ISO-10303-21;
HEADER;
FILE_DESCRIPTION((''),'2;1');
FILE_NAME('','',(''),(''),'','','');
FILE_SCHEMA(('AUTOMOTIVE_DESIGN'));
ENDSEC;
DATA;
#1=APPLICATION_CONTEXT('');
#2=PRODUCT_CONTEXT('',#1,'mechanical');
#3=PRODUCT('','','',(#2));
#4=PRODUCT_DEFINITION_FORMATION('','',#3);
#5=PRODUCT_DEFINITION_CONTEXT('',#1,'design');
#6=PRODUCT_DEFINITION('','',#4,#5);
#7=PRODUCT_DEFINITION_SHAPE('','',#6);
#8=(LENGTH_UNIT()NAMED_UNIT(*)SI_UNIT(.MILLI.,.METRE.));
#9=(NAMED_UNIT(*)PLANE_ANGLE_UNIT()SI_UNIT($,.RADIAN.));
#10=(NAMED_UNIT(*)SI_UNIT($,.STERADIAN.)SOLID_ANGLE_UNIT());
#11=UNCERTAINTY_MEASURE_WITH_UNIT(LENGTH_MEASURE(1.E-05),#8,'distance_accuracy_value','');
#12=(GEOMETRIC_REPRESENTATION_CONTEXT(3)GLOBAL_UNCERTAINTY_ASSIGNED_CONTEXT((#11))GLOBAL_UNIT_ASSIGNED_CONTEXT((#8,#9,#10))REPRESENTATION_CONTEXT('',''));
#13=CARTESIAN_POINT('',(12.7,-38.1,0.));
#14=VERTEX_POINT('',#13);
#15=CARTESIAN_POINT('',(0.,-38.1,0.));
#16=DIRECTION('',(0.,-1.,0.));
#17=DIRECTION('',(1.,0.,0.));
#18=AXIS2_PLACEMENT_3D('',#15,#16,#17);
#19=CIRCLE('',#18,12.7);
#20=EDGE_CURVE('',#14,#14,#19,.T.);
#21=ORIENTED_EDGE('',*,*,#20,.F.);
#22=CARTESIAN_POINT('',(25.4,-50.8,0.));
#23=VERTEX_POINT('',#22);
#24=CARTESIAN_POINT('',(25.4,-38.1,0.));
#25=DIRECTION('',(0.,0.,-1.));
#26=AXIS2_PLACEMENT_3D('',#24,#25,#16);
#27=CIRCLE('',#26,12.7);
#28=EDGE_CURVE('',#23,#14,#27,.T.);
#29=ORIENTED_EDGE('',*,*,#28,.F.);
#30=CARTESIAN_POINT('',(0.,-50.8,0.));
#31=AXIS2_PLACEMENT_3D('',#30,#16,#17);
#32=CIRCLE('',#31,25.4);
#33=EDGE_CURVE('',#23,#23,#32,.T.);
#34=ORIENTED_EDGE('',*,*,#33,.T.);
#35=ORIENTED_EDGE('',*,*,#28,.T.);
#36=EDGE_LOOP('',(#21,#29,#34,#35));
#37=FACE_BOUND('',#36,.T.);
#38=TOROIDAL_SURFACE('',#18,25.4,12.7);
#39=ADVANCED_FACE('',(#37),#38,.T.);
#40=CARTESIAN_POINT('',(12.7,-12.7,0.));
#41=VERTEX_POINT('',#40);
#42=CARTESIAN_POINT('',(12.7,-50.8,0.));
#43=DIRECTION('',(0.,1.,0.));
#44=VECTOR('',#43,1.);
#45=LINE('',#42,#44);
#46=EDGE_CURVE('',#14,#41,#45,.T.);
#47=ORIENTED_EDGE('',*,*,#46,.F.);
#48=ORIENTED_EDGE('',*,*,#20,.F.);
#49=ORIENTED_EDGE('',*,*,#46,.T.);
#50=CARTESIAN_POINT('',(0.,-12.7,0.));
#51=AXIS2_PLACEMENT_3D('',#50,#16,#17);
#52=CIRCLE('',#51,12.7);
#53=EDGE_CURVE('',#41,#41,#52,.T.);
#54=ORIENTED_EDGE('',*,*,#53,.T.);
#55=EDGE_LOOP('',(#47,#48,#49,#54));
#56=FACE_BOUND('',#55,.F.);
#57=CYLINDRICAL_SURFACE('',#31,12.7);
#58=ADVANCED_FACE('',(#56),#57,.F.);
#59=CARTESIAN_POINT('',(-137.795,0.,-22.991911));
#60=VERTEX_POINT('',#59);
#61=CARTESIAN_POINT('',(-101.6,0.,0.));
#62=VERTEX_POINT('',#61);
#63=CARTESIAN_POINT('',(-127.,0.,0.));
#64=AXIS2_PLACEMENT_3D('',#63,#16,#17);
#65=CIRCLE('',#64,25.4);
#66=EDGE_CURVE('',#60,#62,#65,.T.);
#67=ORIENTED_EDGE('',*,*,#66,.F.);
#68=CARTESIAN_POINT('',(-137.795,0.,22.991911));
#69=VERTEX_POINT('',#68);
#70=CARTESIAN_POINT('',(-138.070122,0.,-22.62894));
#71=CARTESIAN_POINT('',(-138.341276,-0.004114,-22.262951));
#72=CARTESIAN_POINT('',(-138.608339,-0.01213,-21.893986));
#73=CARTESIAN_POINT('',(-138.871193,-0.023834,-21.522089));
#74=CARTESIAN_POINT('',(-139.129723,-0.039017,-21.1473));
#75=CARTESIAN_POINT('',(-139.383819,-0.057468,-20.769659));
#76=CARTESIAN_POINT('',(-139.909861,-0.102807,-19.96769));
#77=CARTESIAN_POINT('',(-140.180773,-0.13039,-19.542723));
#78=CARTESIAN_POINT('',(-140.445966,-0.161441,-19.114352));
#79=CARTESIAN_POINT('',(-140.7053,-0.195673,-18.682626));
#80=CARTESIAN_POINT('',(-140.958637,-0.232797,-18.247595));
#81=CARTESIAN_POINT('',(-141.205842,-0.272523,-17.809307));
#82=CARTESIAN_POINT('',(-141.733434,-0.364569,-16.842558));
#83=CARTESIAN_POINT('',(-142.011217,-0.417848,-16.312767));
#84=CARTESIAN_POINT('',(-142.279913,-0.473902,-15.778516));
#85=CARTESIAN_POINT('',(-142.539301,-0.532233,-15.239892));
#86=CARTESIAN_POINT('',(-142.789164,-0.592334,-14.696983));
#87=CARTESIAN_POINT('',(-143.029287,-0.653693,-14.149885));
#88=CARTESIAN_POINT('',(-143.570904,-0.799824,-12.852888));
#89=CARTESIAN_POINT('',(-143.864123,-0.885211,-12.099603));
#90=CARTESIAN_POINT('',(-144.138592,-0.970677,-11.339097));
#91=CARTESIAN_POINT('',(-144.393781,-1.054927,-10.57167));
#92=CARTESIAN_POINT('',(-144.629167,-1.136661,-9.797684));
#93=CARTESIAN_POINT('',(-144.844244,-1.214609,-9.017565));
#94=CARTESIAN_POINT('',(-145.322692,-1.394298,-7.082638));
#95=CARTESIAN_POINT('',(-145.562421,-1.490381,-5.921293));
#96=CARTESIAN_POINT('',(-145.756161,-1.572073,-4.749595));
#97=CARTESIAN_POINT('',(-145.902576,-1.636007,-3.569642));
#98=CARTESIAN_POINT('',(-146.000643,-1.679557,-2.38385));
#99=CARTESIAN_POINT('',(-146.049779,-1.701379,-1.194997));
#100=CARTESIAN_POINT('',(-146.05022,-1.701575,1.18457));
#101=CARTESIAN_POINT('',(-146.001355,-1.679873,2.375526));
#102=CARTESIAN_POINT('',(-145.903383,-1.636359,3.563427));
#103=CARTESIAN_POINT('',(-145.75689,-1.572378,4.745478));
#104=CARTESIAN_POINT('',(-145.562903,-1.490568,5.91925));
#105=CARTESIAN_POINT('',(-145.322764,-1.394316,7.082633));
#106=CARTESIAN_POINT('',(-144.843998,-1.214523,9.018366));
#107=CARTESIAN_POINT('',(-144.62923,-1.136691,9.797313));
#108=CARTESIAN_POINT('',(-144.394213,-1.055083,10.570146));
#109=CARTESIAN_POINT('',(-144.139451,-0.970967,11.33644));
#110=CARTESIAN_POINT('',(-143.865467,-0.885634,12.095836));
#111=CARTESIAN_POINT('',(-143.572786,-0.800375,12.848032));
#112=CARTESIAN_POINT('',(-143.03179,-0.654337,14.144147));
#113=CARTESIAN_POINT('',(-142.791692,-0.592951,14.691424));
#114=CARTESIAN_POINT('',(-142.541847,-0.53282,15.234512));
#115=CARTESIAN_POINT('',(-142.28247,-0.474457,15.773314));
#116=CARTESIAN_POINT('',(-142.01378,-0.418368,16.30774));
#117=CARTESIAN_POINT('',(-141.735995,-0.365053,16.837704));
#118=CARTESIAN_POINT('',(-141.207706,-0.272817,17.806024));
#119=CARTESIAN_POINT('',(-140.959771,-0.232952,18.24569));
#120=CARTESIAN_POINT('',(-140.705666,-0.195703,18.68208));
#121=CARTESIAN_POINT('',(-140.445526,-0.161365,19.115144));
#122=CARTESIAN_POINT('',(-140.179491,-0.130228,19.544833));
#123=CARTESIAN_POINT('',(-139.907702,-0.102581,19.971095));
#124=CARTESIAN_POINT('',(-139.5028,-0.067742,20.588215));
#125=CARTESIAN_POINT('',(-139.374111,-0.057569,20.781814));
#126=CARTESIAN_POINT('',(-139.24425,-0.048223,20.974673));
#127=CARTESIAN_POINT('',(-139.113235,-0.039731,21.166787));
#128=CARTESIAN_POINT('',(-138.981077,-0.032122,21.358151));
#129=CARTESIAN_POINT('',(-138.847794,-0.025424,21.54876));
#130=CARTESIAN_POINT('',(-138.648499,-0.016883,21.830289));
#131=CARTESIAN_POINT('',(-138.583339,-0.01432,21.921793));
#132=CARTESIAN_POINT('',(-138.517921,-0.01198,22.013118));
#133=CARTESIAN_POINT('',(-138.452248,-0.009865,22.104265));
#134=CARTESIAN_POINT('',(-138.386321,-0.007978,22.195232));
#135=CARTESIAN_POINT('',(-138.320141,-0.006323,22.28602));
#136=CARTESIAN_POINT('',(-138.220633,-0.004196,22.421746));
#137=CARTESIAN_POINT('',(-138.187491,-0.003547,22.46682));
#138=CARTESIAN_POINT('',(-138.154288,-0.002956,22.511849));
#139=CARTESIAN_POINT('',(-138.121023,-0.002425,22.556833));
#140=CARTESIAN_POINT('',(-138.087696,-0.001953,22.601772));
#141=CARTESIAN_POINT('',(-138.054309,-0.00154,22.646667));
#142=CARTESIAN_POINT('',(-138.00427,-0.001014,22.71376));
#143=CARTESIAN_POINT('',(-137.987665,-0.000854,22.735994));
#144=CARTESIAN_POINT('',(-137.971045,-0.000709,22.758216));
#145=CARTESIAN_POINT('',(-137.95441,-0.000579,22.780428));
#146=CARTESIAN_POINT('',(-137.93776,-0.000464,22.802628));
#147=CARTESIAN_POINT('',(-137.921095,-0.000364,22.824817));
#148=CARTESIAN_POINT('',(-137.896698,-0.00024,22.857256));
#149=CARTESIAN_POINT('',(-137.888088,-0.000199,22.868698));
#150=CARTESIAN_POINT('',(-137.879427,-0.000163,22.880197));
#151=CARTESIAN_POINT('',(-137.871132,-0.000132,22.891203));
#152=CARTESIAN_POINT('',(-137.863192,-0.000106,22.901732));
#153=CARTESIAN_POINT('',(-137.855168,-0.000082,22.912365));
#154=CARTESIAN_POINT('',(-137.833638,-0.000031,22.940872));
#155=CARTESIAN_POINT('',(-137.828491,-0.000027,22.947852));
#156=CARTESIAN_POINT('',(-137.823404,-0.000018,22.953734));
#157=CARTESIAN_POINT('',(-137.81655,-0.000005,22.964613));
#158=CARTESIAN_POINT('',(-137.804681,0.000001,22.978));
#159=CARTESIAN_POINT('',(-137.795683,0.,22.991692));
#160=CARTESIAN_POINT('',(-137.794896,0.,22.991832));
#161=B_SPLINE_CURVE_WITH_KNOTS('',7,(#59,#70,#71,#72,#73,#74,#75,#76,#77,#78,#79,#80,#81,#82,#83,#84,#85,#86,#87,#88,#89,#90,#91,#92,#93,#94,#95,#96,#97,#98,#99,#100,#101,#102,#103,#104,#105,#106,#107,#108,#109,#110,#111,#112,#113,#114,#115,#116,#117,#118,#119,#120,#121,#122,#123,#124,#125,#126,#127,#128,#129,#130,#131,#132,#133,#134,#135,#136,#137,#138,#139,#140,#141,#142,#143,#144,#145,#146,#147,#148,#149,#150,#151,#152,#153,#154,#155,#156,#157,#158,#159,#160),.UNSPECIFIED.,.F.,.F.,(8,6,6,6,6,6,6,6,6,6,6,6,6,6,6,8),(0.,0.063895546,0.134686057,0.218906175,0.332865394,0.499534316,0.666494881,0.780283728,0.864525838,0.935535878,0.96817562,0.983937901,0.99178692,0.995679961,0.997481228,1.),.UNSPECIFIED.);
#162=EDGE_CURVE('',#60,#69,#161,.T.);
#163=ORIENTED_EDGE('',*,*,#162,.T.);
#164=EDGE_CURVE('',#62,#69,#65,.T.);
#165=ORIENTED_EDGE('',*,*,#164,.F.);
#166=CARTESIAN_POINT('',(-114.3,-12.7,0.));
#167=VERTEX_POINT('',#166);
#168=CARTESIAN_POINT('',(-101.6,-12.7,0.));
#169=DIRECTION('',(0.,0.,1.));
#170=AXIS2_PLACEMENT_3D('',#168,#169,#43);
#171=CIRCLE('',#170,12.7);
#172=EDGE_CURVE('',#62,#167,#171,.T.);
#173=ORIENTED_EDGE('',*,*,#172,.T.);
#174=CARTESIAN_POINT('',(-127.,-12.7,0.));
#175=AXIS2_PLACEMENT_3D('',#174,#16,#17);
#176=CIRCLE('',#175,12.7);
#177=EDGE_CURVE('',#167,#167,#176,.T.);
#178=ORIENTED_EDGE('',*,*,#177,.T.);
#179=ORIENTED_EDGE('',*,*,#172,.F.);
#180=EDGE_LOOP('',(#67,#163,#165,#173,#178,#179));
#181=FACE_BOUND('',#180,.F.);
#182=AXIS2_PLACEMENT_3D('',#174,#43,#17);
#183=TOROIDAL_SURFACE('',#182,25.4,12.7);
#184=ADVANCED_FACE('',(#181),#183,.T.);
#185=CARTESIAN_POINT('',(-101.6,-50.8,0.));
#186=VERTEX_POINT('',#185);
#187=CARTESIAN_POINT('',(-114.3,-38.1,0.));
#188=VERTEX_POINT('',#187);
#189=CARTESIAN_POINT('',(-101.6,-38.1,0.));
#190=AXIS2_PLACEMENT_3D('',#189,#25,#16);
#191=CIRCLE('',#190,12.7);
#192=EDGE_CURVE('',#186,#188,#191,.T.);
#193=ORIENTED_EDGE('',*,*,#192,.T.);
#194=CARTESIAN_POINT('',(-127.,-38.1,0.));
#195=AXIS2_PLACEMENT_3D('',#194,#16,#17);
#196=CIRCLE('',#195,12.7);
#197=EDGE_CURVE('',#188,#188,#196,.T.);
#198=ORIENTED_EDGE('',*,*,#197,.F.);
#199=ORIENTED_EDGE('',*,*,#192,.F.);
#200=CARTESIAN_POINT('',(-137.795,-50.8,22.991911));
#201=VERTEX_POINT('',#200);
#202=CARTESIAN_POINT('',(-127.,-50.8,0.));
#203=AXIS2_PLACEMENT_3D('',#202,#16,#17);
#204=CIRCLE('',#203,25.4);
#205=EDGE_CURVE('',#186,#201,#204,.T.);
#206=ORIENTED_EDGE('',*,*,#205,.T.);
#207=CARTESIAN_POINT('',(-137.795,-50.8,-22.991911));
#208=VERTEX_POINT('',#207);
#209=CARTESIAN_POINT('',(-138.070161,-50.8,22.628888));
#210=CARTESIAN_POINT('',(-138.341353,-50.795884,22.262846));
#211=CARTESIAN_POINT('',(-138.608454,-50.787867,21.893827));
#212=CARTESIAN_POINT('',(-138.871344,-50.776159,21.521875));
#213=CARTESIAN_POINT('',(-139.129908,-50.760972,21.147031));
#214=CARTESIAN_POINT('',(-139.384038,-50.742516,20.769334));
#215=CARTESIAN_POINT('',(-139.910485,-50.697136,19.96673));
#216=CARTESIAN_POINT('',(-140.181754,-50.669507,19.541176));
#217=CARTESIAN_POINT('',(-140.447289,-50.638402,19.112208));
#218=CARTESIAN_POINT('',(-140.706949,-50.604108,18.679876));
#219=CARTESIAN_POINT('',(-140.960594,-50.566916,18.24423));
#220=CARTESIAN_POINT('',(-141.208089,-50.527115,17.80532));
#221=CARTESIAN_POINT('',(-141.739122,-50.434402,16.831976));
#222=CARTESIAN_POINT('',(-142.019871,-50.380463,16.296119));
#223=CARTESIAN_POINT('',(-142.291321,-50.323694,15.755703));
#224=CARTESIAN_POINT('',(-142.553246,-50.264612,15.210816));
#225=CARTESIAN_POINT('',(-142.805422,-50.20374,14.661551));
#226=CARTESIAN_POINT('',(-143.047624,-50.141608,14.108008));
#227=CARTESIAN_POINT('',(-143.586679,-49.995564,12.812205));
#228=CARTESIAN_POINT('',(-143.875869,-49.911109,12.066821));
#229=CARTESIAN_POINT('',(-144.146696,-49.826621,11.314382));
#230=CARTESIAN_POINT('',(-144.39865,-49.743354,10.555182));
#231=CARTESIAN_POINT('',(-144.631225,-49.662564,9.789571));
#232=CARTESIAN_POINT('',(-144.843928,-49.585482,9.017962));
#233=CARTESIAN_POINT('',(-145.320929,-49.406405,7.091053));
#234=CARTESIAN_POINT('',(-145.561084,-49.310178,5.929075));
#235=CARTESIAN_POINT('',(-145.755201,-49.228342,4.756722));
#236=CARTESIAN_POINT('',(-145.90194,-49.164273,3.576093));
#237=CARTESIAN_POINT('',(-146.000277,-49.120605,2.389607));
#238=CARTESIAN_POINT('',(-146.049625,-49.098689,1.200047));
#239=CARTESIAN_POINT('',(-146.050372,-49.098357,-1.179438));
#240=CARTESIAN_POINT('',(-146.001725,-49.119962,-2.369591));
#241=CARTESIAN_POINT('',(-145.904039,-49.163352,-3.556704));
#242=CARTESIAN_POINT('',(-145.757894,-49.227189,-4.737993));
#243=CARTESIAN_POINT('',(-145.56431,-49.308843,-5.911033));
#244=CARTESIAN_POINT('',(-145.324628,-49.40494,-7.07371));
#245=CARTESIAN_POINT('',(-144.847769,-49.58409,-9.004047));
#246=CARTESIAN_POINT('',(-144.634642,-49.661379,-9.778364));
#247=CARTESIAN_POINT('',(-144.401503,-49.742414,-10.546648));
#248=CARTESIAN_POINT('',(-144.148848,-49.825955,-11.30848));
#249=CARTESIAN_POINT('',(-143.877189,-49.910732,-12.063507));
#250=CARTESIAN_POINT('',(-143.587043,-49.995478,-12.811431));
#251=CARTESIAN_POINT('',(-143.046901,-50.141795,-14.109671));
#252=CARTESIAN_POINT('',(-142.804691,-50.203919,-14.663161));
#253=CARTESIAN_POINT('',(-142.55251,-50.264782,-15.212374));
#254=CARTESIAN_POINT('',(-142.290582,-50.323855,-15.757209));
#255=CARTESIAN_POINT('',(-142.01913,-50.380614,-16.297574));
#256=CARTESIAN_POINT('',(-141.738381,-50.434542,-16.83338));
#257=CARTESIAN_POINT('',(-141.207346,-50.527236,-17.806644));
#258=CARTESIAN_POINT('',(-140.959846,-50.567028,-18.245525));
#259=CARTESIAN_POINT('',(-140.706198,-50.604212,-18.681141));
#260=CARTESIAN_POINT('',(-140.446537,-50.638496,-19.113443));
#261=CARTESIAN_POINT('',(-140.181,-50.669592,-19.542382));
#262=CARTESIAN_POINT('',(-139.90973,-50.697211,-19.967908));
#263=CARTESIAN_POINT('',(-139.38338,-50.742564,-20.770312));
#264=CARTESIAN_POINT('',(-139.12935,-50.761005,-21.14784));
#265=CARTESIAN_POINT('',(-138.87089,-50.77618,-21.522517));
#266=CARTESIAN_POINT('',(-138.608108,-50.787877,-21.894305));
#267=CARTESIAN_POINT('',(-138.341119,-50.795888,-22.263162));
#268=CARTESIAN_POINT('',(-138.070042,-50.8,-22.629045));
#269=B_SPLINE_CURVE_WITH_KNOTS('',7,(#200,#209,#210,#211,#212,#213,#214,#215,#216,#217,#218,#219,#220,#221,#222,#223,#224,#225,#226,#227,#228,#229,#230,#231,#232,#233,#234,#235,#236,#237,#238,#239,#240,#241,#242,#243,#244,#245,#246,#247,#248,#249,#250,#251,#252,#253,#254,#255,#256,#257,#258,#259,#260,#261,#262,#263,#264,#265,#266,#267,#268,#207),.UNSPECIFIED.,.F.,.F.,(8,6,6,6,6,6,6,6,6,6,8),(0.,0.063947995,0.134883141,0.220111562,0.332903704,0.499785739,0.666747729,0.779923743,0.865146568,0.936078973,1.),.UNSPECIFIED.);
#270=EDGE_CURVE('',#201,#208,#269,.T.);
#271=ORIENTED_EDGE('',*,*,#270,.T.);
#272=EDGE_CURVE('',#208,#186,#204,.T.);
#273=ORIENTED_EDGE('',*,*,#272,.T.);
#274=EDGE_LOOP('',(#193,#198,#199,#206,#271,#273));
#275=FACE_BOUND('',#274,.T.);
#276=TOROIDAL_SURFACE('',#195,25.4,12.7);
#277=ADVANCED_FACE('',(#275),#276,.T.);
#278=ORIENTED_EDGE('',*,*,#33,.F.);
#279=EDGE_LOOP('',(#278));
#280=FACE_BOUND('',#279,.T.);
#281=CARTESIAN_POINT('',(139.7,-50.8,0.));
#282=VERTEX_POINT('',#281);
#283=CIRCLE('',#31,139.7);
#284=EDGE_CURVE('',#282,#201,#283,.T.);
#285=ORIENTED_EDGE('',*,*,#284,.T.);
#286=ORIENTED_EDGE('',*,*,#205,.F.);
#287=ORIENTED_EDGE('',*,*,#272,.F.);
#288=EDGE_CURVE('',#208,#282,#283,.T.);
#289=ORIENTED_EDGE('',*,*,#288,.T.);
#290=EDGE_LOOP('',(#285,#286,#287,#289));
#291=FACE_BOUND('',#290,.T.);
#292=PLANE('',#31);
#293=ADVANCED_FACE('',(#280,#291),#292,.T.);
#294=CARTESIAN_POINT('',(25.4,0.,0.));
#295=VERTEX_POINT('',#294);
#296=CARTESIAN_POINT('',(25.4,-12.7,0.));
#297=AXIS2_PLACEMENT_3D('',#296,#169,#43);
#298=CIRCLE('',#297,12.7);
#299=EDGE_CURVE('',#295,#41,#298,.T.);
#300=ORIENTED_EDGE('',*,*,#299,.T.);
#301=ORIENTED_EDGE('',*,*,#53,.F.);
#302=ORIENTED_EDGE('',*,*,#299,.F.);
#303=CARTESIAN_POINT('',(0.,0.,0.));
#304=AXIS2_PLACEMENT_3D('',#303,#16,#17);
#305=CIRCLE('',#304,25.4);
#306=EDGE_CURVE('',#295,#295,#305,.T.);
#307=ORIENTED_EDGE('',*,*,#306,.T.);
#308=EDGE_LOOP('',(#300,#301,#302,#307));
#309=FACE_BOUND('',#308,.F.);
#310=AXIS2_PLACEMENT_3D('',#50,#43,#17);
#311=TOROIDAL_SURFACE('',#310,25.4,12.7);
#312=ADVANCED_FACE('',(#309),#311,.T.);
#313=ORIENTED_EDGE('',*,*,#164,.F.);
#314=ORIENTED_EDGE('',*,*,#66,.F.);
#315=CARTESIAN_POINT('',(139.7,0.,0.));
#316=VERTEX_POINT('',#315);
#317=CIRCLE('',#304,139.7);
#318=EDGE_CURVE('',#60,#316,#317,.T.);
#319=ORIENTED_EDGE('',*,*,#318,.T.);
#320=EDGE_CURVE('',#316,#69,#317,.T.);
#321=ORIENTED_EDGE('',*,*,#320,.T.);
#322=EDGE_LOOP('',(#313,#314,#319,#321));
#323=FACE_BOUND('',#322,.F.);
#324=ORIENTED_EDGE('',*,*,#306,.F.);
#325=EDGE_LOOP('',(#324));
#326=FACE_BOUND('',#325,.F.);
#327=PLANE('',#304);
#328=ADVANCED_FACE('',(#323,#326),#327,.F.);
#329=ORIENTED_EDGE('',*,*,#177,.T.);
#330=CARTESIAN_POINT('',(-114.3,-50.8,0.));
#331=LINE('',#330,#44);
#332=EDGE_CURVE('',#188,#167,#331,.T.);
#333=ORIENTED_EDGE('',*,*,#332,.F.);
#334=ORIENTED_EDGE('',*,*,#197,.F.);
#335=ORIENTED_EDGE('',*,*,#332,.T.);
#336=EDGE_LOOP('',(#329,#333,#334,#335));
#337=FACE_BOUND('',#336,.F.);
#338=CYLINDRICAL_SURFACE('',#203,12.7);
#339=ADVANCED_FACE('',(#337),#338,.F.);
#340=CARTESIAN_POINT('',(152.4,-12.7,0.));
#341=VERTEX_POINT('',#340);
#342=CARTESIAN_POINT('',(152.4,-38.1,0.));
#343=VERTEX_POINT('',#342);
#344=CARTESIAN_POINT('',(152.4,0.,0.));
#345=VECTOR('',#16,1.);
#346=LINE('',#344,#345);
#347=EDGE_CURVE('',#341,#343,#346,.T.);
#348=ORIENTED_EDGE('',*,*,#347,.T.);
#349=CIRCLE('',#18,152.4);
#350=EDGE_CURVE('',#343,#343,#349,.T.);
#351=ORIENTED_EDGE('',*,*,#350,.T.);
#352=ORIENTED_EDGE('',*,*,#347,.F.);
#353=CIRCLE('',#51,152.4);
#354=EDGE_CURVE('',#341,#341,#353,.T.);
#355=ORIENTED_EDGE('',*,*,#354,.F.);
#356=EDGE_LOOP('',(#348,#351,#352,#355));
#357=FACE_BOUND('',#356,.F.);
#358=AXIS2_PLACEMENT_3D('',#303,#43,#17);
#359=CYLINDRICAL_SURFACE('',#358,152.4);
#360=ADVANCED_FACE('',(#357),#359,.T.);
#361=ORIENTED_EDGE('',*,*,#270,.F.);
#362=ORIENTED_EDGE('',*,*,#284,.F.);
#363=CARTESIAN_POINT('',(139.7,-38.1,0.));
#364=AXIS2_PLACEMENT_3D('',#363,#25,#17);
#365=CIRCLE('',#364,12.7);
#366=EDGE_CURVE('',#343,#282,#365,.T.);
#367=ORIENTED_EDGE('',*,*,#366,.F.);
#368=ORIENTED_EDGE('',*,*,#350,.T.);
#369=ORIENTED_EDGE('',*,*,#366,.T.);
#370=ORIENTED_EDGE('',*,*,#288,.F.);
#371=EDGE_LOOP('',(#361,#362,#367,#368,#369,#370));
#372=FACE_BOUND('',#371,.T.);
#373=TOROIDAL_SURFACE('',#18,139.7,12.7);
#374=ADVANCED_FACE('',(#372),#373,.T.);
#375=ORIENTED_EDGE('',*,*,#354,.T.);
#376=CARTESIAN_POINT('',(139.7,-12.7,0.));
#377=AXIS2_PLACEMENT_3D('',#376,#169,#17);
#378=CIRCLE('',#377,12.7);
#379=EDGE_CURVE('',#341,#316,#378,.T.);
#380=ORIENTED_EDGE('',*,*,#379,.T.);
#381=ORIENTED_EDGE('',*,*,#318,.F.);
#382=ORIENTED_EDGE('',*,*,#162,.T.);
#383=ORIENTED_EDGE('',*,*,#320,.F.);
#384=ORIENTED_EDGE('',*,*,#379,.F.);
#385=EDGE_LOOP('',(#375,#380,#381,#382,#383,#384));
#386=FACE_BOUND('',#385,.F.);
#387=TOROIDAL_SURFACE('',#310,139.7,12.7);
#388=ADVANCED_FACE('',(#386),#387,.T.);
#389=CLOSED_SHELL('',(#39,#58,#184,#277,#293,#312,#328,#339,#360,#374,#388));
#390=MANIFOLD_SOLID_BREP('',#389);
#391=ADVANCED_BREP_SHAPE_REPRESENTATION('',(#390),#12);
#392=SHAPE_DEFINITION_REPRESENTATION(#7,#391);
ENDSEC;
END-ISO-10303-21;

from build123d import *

# Parameters (mm, degrees)
F0_R     = 152.4
F1_DEPTH = 50.8
F2_R     = 12.7
F3_DEPTH = 50.801


# Not quite as in the source:
# - a fillet or chamfer that OpenCascade refuses, or shapes differently, is made with other operations: its cross-section is extruded or revolved along the edge and cut away or added


with BuildPart() as f1:
    # F0 (on Front) → F1 (new body)
    with BuildSketch(Plane.XZ):
        Circle(F0_R)
    extrude(amount=F1_DEPTH)

    # F2 (on face) → F3 (cut, through all)
    with BuildSketch(Plane.XZ.offset(50.8)):
        Circle(F2_R)
        with Locations((-127, 0)):
            Circle(F2_R)
    extrude(amount=-F3_DEPTH, mode=Mode.SUBTRACT)

    # F4: fillet of radius 12.7 on 6 edges, made by hand

    # F4_s1 → F4_t2 (revolve, cut)
    with BuildSketch(Plane.XY):
        with BuildLine():
            ThreePointArc((152.4, -38.1), (148.6802561211, -47.0802561211), (139.7, -50.8))
            Line((139.7, -50.8), (152.4, -50.8))
            Line((152.4, -50.8), (152.4, -38.1))
        make_face()
    revolve(axis=Axis((0, -50.8, 0), (0, -1, 0)), mode=Mode.SUBTRACT)

    # F4_s3 → F4_t4 (revolve, cut)
    with BuildSketch(Plane.XY):
        with BuildLine():
            ThreePointArc((-101.6, -50.8), (-110.5802561211, -47.0802561211), (-114.3, -38.1))
            Line((-114.3, -38.1), (-114.3, -50.8))
            Line((-114.3, -50.8), (-101.6, -50.8))
        make_face()
    revolve(axis=Axis((-127, -50.8, 0), (0, -1, 0)), mode=Mode.SUBTRACT)

    # F4_s5 → F4_t6 (revolve, cut)
    with BuildSketch(Plane.XY):
        with BuildLine():
            ThreePointArc((25.4, -50.8), (16.4197438789, -47.0802561211), (12.7, -38.1))
            Line((12.7, -38.1), (12.7, -50.8))
            Line((12.7, -50.8), (25.4, -50.8))
        make_face()
    revolve(axis=Axis((0, -50.8, 0), (0, -1, 0)), mode=Mode.SUBTRACT)

    # F4_s7 → F4_t8 (revolve, cut)
    with BuildSketch(Plane.XY):
        with BuildLine():
            ThreePointArc((152.4, -12.7), (148.6802561211, -3.7197438789), (139.7, 0))
            Line((139.7, 0), (152.4, 0))
            Line((152.4, 0), (152.4, -12.7))
        make_face()
    revolve(axis=Axis((0, 0, 0), (0, -1, 0)), mode=Mode.SUBTRACT)

    # F4_s9 → F4_t10 (revolve, cut)
    with BuildSketch(Plane.XY):
        with BuildLine():
            ThreePointArc((-101.6, 0), (-110.5802561211, -3.7197438789), (-114.3, -12.7))
            Line((-114.3, -12.7), (-114.3, 0))
            Line((-114.3, 0), (-101.6, 0))
        make_face()
    revolve(axis=Axis((-127, 0, 0), (0, -1, 0)), mode=Mode.SUBTRACT)

    # F4_s11 → F4_t12 (revolve, cut)
    with BuildSketch(Plane.XY):
        with BuildLine():
            ThreePointArc((25.4, 0), (16.4197438789, -3.7197438789), (12.7, -12.7))
            Line((12.7, -12.7), (12.7, 0))
            Line((12.7, 0), (25.4, 0))
        make_face()
    revolve(axis=Axis((0, 0, 0), (0, -1, 0)), mode=Mode.SUBTRACT)


solid = f1.part
